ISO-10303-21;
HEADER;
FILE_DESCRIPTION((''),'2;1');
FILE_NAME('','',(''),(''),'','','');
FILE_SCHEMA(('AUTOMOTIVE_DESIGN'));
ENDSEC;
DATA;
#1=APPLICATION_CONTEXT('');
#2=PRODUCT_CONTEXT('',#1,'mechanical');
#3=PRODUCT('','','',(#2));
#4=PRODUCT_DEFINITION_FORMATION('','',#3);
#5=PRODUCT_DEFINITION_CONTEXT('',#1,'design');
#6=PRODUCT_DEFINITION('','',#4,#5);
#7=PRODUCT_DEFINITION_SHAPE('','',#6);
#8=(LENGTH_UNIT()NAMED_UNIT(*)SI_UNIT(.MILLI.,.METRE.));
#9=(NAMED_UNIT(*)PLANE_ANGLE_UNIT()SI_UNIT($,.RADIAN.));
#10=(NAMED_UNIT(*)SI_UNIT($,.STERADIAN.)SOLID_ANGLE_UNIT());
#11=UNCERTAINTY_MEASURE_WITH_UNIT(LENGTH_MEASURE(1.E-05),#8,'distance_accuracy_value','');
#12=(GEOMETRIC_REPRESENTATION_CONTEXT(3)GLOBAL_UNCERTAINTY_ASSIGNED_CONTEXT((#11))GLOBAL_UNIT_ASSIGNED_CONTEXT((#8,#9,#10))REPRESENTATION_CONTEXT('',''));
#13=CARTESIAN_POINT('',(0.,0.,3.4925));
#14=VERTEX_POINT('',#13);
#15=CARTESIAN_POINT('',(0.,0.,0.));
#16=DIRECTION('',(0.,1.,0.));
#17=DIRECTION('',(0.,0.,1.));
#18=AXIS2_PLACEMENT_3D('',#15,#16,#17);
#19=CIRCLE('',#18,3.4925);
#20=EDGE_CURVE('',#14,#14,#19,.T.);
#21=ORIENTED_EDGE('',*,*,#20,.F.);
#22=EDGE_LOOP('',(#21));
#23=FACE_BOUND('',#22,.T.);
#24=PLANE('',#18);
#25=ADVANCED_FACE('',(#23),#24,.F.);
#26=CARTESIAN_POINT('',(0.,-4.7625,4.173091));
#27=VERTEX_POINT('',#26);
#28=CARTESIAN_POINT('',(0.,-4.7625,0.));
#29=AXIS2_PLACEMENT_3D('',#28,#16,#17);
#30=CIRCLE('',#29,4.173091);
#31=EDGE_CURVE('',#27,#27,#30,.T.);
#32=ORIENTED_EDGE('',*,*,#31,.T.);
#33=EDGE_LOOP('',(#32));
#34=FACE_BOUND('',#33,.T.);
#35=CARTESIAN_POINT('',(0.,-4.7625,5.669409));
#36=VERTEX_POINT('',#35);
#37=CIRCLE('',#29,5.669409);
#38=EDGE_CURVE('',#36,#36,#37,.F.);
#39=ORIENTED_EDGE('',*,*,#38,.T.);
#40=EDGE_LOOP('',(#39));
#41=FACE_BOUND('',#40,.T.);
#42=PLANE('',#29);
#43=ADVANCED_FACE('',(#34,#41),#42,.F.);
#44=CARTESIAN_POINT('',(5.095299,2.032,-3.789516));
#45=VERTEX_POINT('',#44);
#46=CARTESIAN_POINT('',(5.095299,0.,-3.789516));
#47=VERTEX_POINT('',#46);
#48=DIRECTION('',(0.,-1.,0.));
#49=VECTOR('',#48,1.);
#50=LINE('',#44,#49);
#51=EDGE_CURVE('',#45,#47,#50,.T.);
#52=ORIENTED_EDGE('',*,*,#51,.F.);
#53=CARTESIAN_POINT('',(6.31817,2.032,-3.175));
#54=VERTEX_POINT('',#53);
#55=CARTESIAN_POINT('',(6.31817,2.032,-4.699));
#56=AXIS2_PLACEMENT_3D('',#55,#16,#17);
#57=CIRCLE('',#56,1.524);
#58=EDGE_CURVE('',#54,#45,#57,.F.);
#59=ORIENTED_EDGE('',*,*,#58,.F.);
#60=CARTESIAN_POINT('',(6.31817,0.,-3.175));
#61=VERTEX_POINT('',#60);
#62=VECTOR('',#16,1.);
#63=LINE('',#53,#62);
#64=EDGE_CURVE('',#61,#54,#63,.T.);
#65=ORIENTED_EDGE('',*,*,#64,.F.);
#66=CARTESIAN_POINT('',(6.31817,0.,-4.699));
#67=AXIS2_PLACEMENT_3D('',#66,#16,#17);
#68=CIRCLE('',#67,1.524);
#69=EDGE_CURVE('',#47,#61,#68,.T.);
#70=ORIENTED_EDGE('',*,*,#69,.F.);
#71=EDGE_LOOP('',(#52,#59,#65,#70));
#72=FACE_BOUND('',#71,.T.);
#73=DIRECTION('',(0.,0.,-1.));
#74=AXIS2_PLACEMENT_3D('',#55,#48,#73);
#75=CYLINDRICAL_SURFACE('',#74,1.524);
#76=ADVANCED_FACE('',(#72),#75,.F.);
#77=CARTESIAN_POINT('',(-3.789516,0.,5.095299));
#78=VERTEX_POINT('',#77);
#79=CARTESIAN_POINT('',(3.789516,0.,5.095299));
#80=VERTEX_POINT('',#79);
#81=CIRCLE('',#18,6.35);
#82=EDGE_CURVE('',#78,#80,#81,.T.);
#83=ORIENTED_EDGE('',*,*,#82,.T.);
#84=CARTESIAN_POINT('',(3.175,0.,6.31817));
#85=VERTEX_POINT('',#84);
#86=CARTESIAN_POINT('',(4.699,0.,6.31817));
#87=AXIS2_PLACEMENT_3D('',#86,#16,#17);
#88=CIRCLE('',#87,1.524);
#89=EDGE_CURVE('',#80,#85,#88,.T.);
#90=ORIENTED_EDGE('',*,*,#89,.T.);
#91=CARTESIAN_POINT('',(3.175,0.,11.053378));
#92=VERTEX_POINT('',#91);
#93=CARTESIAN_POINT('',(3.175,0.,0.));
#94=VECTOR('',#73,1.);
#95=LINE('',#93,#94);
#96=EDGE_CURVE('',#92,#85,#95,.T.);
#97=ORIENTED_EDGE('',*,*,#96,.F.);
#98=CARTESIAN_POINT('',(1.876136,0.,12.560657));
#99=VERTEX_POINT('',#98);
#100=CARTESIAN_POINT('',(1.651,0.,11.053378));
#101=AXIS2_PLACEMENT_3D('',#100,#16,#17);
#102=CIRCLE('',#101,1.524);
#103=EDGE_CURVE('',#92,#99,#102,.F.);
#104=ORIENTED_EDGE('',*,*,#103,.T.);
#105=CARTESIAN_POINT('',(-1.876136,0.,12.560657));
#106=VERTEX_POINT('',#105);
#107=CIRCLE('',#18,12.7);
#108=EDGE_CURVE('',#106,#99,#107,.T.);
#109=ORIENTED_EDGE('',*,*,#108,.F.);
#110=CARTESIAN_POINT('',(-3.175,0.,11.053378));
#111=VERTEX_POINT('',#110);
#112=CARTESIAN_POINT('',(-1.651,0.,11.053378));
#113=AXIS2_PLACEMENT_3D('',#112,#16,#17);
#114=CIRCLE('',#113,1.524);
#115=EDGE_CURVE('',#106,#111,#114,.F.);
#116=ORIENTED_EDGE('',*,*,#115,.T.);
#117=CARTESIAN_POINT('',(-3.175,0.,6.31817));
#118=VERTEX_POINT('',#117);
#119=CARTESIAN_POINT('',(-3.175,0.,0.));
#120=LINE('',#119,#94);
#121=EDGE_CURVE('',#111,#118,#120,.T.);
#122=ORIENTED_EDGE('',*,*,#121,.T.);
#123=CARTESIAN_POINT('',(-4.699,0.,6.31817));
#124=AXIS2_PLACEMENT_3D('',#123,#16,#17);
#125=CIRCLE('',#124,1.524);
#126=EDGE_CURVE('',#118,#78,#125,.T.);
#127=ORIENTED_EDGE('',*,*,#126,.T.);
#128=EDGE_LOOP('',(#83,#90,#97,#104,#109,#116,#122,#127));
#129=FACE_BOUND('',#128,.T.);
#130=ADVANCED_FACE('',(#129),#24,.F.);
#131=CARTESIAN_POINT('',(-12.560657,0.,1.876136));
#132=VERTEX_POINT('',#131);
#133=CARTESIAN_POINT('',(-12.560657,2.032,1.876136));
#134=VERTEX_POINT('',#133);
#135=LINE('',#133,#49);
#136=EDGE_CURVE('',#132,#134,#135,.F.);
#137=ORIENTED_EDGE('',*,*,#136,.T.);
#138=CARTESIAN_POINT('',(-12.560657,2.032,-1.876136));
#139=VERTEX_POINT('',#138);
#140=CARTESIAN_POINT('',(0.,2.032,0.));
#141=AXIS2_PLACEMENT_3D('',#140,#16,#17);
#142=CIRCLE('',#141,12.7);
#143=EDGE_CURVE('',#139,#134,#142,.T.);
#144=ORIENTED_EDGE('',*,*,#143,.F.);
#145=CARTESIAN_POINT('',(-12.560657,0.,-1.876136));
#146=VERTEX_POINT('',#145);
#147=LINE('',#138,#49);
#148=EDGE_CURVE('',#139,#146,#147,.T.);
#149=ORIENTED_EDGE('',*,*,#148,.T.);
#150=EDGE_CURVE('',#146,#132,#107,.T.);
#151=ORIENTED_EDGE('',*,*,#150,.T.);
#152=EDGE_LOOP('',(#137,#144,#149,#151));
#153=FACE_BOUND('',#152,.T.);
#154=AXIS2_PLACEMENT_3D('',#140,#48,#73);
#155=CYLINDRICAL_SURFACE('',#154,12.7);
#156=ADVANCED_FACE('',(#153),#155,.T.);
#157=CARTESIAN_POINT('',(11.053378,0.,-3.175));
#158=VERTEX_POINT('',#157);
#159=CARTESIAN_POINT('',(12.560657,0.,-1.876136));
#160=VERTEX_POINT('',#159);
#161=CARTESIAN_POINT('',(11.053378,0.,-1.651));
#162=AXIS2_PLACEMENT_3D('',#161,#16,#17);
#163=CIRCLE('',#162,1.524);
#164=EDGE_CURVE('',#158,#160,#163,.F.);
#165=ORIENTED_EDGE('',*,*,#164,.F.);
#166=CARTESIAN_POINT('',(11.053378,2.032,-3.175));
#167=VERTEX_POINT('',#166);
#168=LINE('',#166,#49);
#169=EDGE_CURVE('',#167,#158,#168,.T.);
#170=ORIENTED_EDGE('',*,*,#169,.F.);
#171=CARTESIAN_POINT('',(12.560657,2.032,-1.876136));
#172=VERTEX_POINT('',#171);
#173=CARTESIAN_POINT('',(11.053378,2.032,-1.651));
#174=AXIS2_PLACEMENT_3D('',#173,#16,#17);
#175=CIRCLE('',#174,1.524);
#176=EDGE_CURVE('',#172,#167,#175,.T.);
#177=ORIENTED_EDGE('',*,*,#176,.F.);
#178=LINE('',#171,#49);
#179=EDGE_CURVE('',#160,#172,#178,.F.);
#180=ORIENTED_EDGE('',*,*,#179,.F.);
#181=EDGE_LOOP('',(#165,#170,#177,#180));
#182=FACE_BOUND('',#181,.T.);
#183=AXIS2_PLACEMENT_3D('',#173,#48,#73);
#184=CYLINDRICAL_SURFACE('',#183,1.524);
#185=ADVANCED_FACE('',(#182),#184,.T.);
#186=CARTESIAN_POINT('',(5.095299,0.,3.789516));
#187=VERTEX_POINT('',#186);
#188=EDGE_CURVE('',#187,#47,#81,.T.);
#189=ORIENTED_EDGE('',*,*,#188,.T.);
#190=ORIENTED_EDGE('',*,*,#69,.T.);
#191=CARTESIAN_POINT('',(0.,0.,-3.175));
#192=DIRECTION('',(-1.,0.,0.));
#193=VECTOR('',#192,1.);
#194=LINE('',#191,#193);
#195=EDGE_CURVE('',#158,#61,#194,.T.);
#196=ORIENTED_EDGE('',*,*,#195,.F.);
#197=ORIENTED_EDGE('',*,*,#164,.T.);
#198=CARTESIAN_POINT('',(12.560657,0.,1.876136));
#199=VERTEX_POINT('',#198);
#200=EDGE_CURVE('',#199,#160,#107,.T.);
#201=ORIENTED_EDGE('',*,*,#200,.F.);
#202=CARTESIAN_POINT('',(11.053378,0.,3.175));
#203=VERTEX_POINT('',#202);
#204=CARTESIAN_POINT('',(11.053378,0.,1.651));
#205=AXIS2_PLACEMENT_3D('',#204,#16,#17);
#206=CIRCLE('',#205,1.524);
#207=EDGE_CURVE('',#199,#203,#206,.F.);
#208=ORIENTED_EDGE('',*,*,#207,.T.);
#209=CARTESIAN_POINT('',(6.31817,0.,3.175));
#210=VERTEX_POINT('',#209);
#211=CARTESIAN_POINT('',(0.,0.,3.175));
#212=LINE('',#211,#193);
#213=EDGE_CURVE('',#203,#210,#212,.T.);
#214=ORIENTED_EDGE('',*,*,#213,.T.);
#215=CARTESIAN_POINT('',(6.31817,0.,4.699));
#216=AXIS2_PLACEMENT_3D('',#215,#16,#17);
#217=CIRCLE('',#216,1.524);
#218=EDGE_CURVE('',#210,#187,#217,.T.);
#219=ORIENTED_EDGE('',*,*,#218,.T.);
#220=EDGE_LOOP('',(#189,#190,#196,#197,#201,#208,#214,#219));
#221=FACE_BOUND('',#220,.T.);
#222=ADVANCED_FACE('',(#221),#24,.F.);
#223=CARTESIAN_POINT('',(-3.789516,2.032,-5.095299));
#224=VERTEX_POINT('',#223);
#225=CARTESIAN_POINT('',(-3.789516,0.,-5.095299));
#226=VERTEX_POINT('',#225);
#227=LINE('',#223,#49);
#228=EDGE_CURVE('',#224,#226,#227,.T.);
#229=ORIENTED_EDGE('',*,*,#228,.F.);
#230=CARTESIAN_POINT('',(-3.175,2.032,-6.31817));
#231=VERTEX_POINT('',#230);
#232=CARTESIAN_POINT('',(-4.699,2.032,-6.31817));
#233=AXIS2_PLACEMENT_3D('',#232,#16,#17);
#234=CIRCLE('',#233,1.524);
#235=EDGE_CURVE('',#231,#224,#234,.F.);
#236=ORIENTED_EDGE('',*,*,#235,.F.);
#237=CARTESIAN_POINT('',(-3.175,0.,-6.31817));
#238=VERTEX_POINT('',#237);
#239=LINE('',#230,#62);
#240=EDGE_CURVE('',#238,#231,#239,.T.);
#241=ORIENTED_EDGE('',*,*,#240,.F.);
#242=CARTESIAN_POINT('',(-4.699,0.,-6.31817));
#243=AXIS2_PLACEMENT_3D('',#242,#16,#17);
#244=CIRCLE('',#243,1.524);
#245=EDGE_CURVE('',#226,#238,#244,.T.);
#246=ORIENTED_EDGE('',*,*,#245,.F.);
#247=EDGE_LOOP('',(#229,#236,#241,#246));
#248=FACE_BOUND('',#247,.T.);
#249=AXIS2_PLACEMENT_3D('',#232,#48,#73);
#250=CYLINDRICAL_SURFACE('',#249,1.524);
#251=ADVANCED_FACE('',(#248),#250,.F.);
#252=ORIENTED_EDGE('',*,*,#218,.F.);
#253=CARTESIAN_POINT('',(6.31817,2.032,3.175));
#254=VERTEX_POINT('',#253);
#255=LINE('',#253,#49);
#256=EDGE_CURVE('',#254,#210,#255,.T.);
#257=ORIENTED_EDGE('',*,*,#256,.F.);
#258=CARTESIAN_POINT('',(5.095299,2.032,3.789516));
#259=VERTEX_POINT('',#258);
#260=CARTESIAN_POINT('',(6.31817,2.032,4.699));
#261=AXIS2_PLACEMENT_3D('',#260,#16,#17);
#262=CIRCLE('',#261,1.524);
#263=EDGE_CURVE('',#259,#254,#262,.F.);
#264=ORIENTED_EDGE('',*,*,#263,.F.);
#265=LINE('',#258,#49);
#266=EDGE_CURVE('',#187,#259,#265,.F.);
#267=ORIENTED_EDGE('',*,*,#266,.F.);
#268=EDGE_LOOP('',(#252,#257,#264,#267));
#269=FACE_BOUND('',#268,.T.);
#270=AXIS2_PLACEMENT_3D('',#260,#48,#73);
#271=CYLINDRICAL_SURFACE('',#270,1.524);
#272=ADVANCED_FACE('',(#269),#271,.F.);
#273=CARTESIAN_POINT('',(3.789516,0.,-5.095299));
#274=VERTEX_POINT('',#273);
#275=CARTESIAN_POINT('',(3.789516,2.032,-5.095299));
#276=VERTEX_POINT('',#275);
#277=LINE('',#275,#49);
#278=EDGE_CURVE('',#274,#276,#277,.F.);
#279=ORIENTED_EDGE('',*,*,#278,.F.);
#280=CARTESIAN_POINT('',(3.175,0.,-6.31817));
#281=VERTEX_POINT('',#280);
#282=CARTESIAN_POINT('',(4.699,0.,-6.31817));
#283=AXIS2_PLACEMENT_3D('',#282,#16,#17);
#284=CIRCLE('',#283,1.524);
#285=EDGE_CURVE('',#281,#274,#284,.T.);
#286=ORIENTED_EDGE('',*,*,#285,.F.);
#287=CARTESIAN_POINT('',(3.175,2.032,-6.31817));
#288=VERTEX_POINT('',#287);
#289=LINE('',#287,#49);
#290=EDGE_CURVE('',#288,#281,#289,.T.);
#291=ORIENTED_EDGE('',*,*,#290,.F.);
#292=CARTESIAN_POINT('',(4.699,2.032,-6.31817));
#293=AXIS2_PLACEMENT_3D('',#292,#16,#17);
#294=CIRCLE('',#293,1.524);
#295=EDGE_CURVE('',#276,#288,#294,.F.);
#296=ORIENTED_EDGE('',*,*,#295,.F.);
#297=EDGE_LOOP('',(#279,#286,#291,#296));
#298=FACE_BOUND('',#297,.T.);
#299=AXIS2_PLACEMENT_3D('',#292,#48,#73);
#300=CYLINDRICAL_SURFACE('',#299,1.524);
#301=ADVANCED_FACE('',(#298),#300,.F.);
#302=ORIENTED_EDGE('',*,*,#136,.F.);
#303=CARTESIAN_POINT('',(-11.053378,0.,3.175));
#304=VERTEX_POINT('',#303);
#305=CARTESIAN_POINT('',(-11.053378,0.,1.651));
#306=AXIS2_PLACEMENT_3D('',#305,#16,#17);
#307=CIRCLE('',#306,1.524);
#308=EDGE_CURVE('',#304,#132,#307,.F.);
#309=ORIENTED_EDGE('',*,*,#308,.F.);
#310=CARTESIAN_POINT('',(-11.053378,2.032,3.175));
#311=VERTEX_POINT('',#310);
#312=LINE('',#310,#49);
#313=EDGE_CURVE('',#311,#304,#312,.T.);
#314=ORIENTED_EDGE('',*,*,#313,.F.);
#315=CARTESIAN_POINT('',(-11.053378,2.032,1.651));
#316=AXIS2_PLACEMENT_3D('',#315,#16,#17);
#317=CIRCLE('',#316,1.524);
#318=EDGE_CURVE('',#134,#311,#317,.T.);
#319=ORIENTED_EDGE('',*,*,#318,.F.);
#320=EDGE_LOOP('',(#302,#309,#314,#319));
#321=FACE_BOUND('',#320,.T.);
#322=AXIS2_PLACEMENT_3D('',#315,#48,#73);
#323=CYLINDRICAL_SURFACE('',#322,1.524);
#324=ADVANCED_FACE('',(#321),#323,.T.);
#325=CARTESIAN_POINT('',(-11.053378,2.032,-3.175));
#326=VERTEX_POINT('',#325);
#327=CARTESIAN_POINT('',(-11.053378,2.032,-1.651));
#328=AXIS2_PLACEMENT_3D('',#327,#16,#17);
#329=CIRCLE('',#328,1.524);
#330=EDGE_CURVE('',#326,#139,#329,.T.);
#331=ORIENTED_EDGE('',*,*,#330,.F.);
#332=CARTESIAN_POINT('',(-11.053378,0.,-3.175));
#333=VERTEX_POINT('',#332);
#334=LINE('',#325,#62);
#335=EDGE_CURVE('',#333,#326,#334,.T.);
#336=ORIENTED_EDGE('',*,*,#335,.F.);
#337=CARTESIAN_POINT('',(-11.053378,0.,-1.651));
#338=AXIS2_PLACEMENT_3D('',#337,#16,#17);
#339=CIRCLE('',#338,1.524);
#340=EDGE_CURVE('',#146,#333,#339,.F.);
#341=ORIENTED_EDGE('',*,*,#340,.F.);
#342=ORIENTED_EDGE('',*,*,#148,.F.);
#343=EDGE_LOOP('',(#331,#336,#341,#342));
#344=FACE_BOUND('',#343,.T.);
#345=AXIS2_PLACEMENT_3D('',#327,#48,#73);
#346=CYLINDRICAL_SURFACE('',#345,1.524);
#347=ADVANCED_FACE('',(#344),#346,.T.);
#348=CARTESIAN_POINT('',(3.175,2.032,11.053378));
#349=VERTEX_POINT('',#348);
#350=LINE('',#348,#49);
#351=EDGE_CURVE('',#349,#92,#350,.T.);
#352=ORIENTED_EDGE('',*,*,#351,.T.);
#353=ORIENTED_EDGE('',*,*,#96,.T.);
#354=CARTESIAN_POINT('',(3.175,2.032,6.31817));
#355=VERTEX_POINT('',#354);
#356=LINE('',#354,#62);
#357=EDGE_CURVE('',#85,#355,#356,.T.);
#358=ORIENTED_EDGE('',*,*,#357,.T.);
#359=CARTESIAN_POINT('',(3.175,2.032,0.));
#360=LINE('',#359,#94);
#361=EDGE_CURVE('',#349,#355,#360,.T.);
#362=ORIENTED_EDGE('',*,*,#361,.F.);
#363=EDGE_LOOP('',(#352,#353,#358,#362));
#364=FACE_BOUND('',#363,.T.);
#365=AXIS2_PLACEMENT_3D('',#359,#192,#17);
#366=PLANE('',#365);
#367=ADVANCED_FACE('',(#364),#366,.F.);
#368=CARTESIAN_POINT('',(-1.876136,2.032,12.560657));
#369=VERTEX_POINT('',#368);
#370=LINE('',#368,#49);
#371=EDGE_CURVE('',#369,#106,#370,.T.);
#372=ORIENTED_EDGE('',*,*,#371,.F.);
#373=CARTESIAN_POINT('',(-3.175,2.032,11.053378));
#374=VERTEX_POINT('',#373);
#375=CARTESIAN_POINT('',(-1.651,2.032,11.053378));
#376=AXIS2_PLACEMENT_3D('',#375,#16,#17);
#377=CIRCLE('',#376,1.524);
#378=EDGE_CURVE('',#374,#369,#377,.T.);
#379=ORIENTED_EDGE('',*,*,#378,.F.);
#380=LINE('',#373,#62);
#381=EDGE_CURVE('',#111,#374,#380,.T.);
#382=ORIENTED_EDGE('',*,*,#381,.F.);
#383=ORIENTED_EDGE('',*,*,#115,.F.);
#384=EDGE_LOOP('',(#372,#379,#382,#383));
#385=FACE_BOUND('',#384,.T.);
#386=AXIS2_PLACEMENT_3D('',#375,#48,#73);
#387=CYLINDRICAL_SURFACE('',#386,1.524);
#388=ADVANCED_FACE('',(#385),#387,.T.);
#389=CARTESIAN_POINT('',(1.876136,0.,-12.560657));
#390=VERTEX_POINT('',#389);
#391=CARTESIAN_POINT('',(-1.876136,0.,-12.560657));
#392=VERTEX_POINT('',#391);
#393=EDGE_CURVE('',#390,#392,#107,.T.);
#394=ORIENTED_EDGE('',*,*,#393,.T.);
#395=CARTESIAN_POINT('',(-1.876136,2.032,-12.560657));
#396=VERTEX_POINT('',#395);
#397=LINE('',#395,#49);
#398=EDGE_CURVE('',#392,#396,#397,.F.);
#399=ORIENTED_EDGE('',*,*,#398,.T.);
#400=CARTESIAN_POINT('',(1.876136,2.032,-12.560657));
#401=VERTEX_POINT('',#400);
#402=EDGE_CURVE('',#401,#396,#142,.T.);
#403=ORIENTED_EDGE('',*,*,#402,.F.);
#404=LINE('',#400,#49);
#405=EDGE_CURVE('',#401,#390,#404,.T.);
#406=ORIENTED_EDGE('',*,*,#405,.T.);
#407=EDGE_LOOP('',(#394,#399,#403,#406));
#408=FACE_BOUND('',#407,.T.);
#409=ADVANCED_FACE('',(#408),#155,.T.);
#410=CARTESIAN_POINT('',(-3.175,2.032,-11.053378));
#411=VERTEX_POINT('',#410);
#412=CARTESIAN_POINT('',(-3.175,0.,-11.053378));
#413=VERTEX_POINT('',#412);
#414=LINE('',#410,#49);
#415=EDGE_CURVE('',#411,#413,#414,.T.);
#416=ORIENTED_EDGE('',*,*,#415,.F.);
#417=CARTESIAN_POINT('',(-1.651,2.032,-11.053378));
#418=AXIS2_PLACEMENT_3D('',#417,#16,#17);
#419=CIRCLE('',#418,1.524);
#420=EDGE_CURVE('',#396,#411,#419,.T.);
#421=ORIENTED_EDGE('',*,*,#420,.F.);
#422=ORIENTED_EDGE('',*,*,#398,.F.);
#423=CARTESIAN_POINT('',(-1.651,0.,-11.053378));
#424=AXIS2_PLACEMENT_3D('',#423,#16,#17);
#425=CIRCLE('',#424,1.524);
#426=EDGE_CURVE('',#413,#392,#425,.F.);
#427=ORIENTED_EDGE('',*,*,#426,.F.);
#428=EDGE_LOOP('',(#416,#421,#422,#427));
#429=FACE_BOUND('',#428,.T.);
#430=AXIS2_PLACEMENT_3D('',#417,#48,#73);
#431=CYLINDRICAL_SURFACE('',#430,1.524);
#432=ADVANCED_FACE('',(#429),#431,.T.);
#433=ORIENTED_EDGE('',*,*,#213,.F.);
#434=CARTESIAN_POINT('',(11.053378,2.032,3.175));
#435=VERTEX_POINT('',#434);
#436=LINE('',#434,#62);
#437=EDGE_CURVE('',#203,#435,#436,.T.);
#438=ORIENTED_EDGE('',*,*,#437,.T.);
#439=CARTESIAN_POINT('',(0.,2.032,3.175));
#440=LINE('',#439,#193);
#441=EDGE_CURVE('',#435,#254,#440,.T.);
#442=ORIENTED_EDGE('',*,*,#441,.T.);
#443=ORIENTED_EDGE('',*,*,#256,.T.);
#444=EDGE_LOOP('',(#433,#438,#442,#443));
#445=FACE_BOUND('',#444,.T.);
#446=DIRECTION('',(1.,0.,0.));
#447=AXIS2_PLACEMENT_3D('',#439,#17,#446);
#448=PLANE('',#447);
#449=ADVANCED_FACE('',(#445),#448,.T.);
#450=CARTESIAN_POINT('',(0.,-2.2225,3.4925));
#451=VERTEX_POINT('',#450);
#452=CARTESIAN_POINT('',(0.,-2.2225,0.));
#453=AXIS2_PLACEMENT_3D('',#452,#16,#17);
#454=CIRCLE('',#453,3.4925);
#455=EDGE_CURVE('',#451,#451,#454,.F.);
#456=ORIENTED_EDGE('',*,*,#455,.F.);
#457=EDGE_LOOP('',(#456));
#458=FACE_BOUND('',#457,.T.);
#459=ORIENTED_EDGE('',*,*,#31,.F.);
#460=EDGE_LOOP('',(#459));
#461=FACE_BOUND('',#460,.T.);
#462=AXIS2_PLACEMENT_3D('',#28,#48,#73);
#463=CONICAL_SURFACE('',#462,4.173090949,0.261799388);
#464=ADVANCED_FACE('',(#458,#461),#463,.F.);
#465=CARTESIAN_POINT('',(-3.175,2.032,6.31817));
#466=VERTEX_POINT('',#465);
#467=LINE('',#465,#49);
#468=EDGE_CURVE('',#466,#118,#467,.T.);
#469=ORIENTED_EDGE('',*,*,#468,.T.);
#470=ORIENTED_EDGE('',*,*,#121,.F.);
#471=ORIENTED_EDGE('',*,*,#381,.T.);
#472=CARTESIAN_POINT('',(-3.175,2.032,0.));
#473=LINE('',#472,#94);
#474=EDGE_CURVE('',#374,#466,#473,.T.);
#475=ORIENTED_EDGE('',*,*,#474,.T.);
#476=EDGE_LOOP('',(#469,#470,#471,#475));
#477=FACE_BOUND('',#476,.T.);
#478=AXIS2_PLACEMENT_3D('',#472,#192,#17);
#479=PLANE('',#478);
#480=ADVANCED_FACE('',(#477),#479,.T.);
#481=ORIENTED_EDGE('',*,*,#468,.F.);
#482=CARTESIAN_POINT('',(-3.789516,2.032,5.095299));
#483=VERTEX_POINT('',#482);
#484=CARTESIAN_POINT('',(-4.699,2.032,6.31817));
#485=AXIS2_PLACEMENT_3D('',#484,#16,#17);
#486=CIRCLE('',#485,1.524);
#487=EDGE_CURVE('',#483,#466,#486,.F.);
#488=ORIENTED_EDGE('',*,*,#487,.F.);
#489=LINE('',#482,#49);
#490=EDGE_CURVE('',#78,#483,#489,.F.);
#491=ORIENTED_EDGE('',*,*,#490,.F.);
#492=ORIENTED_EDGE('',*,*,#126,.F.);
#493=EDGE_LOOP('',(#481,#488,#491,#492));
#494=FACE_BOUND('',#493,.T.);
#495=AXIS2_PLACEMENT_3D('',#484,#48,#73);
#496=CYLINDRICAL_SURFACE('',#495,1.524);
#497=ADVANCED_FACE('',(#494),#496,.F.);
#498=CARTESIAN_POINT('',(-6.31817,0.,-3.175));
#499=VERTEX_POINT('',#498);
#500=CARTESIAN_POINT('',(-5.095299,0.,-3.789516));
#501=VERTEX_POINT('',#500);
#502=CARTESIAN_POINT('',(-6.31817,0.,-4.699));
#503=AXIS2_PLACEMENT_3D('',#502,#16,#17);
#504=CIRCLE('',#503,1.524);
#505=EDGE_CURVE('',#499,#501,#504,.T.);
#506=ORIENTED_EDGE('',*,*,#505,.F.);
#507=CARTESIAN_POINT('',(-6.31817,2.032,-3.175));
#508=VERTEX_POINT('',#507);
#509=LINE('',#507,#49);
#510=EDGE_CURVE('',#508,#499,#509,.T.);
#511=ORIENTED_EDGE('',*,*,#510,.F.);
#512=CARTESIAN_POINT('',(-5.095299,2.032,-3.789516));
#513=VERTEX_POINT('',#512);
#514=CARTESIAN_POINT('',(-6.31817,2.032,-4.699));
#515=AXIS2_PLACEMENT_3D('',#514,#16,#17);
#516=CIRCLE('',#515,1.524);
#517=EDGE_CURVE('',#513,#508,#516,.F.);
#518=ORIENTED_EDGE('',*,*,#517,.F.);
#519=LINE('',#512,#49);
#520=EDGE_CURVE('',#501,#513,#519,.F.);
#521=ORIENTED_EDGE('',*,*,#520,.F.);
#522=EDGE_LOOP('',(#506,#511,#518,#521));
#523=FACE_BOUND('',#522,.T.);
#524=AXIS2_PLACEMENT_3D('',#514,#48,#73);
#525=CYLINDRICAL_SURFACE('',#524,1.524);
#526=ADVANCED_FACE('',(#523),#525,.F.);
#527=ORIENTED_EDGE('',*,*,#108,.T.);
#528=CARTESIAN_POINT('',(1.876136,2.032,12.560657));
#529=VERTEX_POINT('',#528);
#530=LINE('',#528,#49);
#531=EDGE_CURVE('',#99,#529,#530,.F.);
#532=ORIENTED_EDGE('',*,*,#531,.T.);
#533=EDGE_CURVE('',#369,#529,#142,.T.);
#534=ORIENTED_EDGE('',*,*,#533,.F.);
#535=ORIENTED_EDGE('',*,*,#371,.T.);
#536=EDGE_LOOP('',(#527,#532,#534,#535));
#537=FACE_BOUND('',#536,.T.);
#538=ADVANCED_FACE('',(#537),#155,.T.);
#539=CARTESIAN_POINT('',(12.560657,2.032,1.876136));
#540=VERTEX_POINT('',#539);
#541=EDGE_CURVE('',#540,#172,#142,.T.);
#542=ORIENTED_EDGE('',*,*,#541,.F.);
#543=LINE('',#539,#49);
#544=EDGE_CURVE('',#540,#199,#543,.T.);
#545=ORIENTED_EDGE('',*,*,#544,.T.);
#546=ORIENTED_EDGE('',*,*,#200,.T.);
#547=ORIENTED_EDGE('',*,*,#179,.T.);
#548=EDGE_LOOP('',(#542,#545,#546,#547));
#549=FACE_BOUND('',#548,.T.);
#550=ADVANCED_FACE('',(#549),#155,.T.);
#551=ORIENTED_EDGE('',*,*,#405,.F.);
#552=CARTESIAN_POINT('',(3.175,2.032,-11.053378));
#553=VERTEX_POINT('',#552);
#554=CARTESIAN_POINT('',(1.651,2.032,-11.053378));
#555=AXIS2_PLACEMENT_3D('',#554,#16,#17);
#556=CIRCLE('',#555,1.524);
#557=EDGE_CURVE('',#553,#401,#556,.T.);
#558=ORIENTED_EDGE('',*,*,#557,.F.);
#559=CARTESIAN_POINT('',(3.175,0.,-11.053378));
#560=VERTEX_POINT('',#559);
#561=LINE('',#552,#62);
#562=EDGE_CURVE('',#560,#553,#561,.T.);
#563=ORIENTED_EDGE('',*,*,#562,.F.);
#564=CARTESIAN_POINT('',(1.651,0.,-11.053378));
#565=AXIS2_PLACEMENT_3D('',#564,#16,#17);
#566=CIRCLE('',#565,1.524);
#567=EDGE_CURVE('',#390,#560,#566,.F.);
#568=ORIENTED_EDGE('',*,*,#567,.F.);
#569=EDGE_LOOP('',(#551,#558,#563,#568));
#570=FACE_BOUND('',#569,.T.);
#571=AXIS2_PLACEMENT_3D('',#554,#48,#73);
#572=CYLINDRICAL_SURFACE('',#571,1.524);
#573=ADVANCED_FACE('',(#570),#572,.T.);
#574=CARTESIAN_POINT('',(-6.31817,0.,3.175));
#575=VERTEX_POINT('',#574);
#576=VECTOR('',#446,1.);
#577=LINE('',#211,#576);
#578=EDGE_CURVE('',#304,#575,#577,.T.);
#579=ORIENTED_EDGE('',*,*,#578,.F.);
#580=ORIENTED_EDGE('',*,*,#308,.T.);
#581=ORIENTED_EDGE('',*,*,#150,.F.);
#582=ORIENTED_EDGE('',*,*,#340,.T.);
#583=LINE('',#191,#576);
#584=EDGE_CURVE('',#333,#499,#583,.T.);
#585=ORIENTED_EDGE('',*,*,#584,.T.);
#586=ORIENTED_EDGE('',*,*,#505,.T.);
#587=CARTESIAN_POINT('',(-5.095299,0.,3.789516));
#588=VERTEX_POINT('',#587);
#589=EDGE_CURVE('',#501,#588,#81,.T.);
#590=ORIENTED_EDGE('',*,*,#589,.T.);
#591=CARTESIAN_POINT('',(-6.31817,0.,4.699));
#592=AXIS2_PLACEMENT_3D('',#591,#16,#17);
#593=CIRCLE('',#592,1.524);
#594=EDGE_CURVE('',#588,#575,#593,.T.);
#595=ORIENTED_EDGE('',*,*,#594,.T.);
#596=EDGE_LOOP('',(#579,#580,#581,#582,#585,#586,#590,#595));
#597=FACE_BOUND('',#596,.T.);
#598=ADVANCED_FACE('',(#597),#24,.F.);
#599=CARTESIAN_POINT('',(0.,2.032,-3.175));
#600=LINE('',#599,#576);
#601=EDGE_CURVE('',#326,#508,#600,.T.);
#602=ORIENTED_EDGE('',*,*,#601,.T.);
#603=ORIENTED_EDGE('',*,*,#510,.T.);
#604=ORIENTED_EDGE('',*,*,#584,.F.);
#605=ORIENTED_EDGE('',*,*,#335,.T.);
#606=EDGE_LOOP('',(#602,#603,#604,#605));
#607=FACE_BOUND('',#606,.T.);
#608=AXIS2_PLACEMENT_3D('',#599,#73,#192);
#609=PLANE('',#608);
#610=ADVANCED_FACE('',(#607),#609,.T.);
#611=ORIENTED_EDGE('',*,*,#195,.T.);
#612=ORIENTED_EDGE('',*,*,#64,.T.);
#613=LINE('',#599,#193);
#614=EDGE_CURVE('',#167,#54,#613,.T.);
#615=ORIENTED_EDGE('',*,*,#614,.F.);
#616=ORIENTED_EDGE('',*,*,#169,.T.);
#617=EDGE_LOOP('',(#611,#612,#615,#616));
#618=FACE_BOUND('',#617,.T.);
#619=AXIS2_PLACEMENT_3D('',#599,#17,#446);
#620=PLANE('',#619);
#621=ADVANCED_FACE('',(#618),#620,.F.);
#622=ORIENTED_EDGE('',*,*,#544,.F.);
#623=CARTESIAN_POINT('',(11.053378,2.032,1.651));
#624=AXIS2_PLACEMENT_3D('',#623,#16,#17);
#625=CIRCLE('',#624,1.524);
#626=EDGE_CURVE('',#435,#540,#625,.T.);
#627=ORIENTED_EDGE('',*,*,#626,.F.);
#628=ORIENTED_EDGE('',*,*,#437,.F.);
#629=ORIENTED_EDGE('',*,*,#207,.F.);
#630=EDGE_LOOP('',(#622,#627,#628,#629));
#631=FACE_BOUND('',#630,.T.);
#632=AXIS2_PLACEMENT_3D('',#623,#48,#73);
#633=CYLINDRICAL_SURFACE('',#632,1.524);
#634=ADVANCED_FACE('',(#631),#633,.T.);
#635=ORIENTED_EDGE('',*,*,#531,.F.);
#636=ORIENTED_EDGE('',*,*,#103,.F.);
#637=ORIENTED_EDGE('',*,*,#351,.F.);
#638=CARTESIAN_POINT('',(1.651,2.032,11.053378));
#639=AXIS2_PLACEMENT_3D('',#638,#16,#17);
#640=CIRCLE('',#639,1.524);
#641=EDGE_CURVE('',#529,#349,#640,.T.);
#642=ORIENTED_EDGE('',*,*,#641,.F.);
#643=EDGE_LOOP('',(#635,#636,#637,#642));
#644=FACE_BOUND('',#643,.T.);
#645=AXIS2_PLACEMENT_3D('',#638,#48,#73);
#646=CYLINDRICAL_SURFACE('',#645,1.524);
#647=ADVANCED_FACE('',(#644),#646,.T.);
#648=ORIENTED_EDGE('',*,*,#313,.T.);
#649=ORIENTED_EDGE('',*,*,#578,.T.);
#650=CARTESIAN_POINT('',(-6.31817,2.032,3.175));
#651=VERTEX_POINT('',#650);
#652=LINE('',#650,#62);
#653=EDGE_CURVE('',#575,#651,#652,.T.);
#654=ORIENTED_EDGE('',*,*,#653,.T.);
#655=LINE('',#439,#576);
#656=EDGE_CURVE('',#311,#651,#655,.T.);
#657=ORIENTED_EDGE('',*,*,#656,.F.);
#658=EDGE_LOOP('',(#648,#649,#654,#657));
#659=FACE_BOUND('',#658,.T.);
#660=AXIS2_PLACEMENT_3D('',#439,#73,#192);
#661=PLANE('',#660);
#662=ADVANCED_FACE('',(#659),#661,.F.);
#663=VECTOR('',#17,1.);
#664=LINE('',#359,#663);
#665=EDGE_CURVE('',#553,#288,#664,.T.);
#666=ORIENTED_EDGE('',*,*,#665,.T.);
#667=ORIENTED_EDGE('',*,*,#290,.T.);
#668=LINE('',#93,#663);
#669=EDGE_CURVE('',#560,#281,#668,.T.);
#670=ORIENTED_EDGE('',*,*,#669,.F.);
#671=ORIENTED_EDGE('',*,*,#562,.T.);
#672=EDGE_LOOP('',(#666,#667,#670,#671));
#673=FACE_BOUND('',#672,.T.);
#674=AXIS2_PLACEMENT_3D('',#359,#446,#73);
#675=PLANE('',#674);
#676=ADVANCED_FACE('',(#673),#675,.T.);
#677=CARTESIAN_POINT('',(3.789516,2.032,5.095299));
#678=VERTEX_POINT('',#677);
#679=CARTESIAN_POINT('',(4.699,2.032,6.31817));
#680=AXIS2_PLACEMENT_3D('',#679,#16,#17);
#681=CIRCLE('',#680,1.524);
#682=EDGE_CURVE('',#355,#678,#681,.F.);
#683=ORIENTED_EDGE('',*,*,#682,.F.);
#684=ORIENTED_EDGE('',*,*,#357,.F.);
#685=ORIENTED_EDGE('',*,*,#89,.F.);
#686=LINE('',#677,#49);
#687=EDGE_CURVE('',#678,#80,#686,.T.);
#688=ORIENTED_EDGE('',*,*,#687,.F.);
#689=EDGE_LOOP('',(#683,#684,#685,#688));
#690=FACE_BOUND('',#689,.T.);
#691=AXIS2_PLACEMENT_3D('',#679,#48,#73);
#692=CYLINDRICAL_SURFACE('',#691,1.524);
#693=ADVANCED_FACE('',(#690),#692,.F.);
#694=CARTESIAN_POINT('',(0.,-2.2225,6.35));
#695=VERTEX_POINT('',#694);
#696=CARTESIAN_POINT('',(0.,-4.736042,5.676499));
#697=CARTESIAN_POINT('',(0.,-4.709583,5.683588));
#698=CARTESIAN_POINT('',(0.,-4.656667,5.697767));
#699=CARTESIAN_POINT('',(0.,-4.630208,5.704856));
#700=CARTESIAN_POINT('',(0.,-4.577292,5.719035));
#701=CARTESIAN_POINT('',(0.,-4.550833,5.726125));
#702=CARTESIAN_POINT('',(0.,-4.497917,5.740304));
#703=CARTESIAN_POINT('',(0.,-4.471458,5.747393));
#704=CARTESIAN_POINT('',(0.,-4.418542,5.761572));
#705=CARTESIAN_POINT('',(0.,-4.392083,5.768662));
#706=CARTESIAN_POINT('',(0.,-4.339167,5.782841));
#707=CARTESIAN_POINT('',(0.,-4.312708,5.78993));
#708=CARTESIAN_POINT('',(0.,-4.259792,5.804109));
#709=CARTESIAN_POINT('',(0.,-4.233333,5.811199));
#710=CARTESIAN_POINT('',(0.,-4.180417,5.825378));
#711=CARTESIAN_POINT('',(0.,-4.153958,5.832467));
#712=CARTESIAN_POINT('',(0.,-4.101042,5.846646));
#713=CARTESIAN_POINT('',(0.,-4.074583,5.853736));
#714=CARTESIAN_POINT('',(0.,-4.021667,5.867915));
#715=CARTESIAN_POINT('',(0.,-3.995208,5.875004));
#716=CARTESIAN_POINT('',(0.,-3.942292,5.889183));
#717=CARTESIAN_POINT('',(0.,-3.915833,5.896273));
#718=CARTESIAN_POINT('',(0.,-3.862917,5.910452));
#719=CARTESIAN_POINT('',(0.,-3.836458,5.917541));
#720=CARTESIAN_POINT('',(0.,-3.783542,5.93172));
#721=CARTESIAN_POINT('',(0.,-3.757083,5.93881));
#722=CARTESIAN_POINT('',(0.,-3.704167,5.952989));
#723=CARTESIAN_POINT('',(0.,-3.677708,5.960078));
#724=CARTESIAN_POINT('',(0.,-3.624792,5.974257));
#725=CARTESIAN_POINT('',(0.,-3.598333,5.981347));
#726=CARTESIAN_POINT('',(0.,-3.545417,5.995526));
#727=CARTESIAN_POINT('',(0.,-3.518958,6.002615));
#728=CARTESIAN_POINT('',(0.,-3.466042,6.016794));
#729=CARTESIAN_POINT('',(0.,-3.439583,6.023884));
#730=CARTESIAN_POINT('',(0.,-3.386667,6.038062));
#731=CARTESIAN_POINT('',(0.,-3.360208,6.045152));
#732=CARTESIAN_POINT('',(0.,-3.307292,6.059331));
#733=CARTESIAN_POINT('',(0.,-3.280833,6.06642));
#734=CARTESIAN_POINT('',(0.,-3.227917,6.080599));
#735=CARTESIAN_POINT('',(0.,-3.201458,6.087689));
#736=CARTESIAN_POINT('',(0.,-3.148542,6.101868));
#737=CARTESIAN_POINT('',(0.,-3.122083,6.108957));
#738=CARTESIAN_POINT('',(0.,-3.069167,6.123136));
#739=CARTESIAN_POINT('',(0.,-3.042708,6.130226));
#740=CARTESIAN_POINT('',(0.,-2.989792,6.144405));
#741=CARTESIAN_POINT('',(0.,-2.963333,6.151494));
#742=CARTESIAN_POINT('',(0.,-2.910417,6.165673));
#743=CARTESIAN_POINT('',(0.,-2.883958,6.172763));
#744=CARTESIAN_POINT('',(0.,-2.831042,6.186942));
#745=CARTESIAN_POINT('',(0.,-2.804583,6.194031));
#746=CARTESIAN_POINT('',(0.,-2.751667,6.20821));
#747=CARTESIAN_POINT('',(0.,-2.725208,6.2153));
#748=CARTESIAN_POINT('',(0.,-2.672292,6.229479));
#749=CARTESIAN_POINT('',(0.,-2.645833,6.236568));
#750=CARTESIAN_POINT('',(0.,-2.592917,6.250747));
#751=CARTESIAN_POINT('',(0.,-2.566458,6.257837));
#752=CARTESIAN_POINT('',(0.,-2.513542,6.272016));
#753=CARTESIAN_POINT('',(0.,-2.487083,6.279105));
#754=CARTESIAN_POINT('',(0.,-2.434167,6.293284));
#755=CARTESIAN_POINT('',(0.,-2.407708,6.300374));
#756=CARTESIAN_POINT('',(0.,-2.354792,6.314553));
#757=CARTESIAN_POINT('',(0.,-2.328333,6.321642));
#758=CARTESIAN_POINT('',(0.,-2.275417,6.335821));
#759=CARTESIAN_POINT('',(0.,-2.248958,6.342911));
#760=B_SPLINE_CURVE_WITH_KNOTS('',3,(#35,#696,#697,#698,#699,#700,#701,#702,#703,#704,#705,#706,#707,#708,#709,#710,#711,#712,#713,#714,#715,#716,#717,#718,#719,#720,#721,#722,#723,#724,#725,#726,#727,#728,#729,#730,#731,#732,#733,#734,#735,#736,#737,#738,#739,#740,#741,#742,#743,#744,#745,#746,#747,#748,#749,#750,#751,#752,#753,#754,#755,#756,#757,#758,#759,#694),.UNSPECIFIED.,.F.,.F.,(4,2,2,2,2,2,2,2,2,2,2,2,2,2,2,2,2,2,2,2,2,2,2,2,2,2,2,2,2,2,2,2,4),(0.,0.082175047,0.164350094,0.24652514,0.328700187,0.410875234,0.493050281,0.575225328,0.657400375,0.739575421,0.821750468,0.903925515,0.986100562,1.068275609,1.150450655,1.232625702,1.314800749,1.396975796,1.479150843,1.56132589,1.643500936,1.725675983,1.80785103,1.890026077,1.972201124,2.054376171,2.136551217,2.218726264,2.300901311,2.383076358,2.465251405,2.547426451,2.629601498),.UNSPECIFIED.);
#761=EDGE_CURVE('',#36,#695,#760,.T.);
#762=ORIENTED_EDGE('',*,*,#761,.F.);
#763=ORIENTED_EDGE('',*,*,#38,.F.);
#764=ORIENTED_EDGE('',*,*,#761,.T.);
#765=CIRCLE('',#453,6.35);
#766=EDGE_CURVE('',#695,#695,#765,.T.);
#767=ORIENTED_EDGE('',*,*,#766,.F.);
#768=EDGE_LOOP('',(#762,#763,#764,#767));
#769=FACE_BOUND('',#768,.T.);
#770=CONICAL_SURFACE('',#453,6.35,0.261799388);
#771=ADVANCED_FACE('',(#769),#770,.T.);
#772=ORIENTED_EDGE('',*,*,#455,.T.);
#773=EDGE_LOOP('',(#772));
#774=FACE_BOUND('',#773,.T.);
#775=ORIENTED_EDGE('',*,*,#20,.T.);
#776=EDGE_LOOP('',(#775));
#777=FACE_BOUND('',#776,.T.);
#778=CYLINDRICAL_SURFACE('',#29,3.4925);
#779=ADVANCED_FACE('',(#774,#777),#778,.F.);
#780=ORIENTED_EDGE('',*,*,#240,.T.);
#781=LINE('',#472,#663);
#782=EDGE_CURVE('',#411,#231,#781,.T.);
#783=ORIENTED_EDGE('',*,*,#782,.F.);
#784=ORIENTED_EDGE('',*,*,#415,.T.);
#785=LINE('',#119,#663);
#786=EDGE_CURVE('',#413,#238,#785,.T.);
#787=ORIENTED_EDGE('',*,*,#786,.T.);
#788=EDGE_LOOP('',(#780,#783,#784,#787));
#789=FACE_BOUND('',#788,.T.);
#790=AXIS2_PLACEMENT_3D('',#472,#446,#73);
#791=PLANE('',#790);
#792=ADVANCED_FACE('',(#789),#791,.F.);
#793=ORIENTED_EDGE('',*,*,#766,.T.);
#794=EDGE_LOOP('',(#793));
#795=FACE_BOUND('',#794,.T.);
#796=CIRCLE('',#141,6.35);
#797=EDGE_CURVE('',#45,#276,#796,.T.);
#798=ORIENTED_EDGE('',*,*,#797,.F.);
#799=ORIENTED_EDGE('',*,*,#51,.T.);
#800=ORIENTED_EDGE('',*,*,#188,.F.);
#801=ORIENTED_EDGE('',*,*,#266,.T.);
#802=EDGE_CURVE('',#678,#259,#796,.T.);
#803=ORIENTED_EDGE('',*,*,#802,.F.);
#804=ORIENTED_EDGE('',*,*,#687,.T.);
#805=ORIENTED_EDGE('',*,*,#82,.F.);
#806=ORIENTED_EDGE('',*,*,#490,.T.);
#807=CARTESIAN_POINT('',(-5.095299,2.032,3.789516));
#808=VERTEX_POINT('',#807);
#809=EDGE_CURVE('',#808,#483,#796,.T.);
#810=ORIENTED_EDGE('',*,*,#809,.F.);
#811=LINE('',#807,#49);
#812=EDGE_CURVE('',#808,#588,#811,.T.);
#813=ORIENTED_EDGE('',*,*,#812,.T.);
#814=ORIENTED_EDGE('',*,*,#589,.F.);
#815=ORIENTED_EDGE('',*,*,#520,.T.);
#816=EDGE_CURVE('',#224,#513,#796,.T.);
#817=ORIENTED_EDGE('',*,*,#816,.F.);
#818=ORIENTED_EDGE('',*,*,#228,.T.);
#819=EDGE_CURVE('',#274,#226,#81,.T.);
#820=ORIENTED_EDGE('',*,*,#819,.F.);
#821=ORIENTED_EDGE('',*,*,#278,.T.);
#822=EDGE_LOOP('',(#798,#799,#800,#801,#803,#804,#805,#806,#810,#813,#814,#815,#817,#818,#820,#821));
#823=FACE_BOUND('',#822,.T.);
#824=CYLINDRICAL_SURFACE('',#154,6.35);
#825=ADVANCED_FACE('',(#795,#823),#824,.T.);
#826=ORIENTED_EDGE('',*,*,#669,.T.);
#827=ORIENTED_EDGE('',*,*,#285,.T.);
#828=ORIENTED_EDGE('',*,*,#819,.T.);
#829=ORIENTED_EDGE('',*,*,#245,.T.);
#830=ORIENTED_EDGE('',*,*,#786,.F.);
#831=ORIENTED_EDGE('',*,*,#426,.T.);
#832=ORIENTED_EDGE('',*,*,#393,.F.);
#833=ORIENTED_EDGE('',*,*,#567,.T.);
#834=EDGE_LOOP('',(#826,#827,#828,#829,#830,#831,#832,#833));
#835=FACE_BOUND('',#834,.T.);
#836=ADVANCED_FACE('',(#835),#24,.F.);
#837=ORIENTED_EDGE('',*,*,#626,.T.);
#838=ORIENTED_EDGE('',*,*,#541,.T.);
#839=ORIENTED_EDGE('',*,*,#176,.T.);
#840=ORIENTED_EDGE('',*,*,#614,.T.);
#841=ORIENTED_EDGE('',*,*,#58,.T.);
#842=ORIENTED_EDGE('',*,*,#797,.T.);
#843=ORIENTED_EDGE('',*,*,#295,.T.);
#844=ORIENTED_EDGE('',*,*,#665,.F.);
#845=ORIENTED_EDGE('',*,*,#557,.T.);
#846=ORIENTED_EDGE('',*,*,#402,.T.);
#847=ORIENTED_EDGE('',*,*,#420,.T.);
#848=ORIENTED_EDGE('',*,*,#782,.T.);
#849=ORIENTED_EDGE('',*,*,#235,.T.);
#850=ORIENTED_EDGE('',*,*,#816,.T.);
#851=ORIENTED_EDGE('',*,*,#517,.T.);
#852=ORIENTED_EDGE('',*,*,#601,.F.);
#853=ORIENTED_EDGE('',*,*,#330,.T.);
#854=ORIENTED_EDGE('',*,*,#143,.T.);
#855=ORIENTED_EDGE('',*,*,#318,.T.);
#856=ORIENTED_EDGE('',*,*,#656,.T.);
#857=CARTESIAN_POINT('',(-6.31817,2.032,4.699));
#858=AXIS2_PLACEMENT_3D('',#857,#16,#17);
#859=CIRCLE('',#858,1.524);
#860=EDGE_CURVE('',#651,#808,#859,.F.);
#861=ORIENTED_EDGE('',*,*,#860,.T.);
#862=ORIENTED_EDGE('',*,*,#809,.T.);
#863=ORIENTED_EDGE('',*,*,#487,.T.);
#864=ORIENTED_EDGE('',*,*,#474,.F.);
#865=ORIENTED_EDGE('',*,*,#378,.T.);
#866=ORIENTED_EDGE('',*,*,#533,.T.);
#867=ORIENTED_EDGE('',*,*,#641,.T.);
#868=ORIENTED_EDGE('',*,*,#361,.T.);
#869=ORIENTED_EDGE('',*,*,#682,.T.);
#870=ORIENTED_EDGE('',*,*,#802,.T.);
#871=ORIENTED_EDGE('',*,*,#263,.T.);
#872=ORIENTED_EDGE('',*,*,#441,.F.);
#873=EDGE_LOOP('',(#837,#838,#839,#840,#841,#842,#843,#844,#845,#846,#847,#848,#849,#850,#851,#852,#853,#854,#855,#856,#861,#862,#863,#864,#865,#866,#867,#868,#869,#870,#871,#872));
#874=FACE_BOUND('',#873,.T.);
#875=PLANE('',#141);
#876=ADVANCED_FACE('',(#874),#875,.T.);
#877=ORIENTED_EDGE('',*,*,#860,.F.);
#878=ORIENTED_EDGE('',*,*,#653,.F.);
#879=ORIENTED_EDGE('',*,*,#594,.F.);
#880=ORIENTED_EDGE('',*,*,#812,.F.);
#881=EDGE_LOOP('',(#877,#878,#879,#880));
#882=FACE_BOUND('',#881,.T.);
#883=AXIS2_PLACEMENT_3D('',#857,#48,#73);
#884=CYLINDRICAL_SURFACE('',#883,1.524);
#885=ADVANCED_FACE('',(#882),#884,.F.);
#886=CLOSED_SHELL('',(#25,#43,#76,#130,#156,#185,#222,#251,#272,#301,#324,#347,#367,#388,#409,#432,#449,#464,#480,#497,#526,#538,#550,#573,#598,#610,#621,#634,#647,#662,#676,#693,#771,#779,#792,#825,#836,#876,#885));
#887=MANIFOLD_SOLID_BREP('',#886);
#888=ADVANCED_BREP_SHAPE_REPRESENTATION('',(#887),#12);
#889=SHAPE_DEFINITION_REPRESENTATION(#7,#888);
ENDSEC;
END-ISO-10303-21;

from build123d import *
from OCP.BRepFilletAPI import BRepFilletAPI_MakeChamfer

# Parameters (mm, degrees)
BOSS_EXTRUDE1_DEPTH = 2.032
BOSS_EXTRUDE2_START = -4.762499999999999
SKETCH1_3_R         = 3.4925
BOSS_EXTRUDE2_DEPTH = 4.762499999999999
CHAMFER1_SIZE       = 2.54
CHAMFER1_SIZE2      = 0.6805909487750533
FILLET2_R           = 1.524


with BuildPart() as part:
    # Sketch1 → Boss-Extrude1 (new body)
    with BuildSketch(Plane(origin=(0, 0, 0), x_dir=(1, 0, 0), z_dir=(0, 1, 0))):
        with BuildLine():
            Line((-3.1749999999999994, 12.29672212420855), (-3.175, 5.499261314031185))
            ThreePointArc((-3.1750000000000007, 5.499261314031186), (-4.490128060534577, 4.490128060534578), (-5.499261314031186, 3.1750000000000016))
            Line((-5.499261314031183, 3.1750000000000007), (-12.296722124208548, 3.1750000000000034))
            ThreePointArc((-12.296722124208548, 3.175000000000004), (-12.700000000000001, 1.56e-15), (-12.29672212420855, -3.175000000000001))
            Line((-12.296722124208545, -3.1750000000000003), (-5.499261314031183, -3.175000000000001))
            ThreePointArc((-5.499261314031185, -3.175000000000003), (-4.490128060534575, -4.490128060534579), (-3.174999999999998, -5.499261314031186))
            Line((-3.174999999999998, -5.499261314031185), (-3.1749999999999976, -12.296722124208545))
            ThreePointArc((-3.1750000000000047, -12.296722124208548), (-2.33e-15, -12.700000000000001), (3.175, -12.29672212420855))
            Line((3.175000000000002, -12.296722124208543), (3.175000000000001, -5.499261314031185))
            ThreePointArc((3.175, -5.499261314031186), (4.490128060534578, -4.490128060534577), (5.499261314031187, -3.1749999999999994))
            Line((5.499261314031186, -3.1749999999999985), (12.296722124208548, -3.1749999999999954))
            ThreePointArc((12.296722124208552, -3.174999999999996), (12.700000000000003, 4.44e-15), (12.296722124208548, 3.1750000000000043))
            Line((12.296722124208546, 3.1750000000000043), (5.499261314031185, 3.1750000000000007))
            ThreePointArc((5.499261314031187, 3.175), (4.490128060534579, 4.490128060534575), (3.1749999999999994, 5.499261314031187))
            Line((3.1749999999999994, 5.499261314031186), (3.175, 12.296722124208548))
            ThreePointArc((3.1750000000000003, 12.29672212420855), (8.9e-16, 12.700000000000001), (-3.1749999999999985, 12.29672212420855))
        make_face()
    extrude(amount=BOSS_EXTRUDE1_DEPTH)

    # Sketch1<3> → Boss-Extrude2 (add)
    with BuildSketch(Plane(origin=(0, 0, 0), x_dir=(1, 0, 0), z_dir=(0, 1, 0)).offset(BOSS_EXTRUDE2_START)):
        with BuildLine():
            ThreePointArc((3.174999999999999, 5.499261314031186), (-1.02e-15, 6.35), (-3.175000000000001, 5.499261314031184))
            ThreePointArc((-3.175000000000001, 5.499261314031184), (-4.490128060534576, 4.490128060534577), (-5.499261314031184, 3.175000000000002))
            ThreePointArc((-5.499261314031184, 3.175000000000002), (-6.35, 7.8e-16), (-5.499261314031185, -3.1750000000000007))
            ThreePointArc((-5.499261314031185, -3.1750000000000007), (-4.490128060534575, -4.490128060534578), (-3.174999999999997, -5.499261314031187))
            ThreePointArc((-3.174999999999997, -5.499261314031187), (-1.17e-15, -6.35), (3.1750000000000007, -5.499261314031185))
            ThreePointArc((3.1750000000000007, -5.499261314031185), (4.4901280605345795, -4.490128060534573), (5.499261314031187, -3.1749999999999976))
            ThreePointArc((5.499261314031187, -3.1749999999999976), (6.133628996935584, -1.6435009364010063), (6.35, -1.56e-15))
            ThreePointArc((6.35, 0), (6.133628996935584, 1.6435009364010074), (5.499261314031185, 3.1750000000000007))
            ThreePointArc((5.499261314031185, 3.1750000000000007), (4.490128060534575, 4.490128060534578), (3.174999999999999, 5.499261314031186))
        make_face()
        with Locations(Location((0, 0, 0), (0, 0, 270))):
            Circle(SKETCH1_3_R, mode=Mode.SUBTRACT)
    extrude(amount=BOSS_EXTRUDE2_DEPTH)

    # Chamfer1: one chamfer whose edges measure the first distance from different faces: ONE call of the kernel's chamfer builder (chamfer() names one face for all edges)
    chamfer1_edges_1 = [part.edges().sort_by_distance(p)[0] for p in [
        (3.174999999999999, -4.762499999999999, -5.499261314031194),
    ]]
    chamfer1_side_1 = [part.faces().sort_by_distance(p)[0] for p in [
        (3.1749999999999865, -2.3812499999999996, -5.499261314031195),
    ]]
    chamfer1_edges_2 = [part.edges().sort_by_distance(p)[0] for p in [
        (1.07e-15, -4.762499999999999, -3.4925),
    ]]
    chamfer1_side_2 = [part.faces().sort_by_distance(p)[0] for p in [
        (1.07e-15, -2.3812499999999996, -3.4925),
    ]]
    chamfer1 = BRepFilletAPI_MakeChamfer(part.part.solid().wrapped)
    for e in chamfer1_edges_1:
        chamfer1.Add(CHAMFER1_SIZE, CHAMFER1_SIZE2, e.wrapped, chamfer1_side_1[0].wrapped)  # the first distance lies on this face
    for e in chamfer1_edges_2:
        chamfer1.Add(CHAMFER1_SIZE, CHAMFER1_SIZE2, e.wrapped, chamfer1_side_2[0].wrapped)  # the first distance lies on this face
    add(Compound.cast(chamfer1.Shape()), mode=Mode.REPLACE)

    # Fillet2
    # the kernel refuses this fillet: 1.524 mm, written as the material it adds along each edge
    with BuildSketch(Plane(origin=(3.174999999999999, 0, -5.499261314031187), x_dir=(0.8356194334098629, 0, 0.5493088043239246), z_dir=(0, 1, 0))) as fillet2_piece_1:
        with BuildLine():
            CenterArc((0.8236501414377086, 1.521442818511674), FILLET2_R, 213.31960697214814, 53.3607860557035)
            Line((-0.44983387507892303, 0.6842962007220136), (0, 0))
            ThreePointArc((0, 0), (0.3677009559989754, 0.01065492286802284), (0.7354019119979511, -2e-17))
        make_face()
    extrude(amount=2.032)
    with BuildSketch(Plane(origin=(5.499261314031186, 0, -3.1750000000000007), x_dir=(-0.5493088043239264, 0, -0.8356194334098619), z_dir=(0, 1, 0))) as fillet2_piece_2:
        with BuildLine():
            CenterArc((0.8236501414377053, -1.5214428185116746), FILLET2_R, 93.31960697214826, 53.360786055703514)
            Line((-0.4498338750789252, -0.6842962007220122), (0, 0))
            ThreePointArc((0, 0), (0.36770095599897556, -0.01065492286802262), (0.7354019119979507, -5e-17))
        make_face()
    extrude(amount=2.032)
    with BuildSketch(Plane(origin=(5.499261314031186, 0, 3.174999999999999), x_dir=(-0.5493088043238707, 0, 0.8356194334098983), z_dir=(0, 1, 0))) as fillet2_piece_3:
        with BuildLine():
            CenterArc((0.82365014143777, 1.5214428185116702), FILLET2_R, 213.31960697214453, 53.36078605570418)
            Line((-0.44983387507891454, 0.6842962007220903), (0, 0))
            ThreePointArc((0, 0), (0.36770095599897146, 0.0106549228680418), (0.7354019119979344, 0))
        make_face()
    extrude(amount=2.032)
    with BuildSketch(Plane(origin=(3.1750000000000007, 0, 5.499261314031186), x_dir=(0.8356194334099104, 0, -0.5493088043238523), z_dir=(0, 1, 0))) as fillet2_piece_4:
        with BuildLine():
            CenterArc((0.8236501414377962, -1.5214428185116662), FILLET2_R, 93.31960697215332, 53.360786055703485)
            Line((-0.44983387507890776, -0.684296200722116), (0, 0))
            ThreePointArc((0, 0), (0.3677009559989559, -0.01065492286805522), (0.7354019119979073, 0))
        make_face()
    extrude(amount=2.032)
    with BuildSketch(Plane(origin=(-3.1749999999999976, 0, 5.499261314031186), x_dir=(-0.8356194334099473, 0, -0.5493088043237963), z_dir=(0, 1, 0))) as fillet2_piece_5:
        with BuildLine():
            CenterArc((0.8236501414378631, 1.5214428185116622), FILLET2_R, 213.31960697213952, 53.36078605570407)
            Line((-0.44983387507889466, 0.6842962007221938), (0, 0))
            ThreePointArc((0, 0), (0.3677009559989472, 0.01065492286807322), (0.7354019119978917, 3e-17))
        make_face()
    extrude(amount=2.032)
    with BuildSketch(Plane(origin=(-5.499261314031184, 0, 3.1750000000000025), x_dir=(0.5493088043237985, 0, 0.8356194334099457), z_dir=(0, 1, 0))) as fillet2_piece_6:
        with BuildLine():
            CenterArc((0.823650141437862, -1.521442818511662), FILLET2_R, 93.31960697215631, 53.36078605570414)
            Line((-0.44983387507889533, -0.6842962007221932), (0, 0))
            ThreePointArc((0, 0), (0.36770095599894603, -0.01065492286807348), (0.7354019119978936, -3e-17))
        make_face()
    extrude(amount=2.032)
    with BuildSketch(Plane(origin=(-5.499261314031185, 0, -3.1750000000000016), x_dir=(0.5493088043238532, 0, -0.8356194334099099), z_dir=(0, 1, 0))) as fillet2_piece_7:
        with BuildLine():
            CenterArc((0.8236501414377951, 1.5214428185116664), FILLET2_R, 213.3196069721432, 53.36078605570356)
            Line((-0.44983387507890893, 0.6842962007221164), (0, 0))
            ThreePointArc((0, 0), (0.3677009559989552, 0.01065492286805513), (0.7354019119979077, 3e-17))
        make_face()
    extrude(amount=2.032)
    with BuildSketch(Plane(origin=(-3.1750000000000007, 0, -5.499261314031186), x_dir=(-0.8356194334098974, 0, 0.5493088043238722), z_dir=(0, 1, 0))) as fillet2_piece_8:
        with BuildLine():
            CenterArc((0.8236501414377697, -1.5214428185116697), FILLET2_R, 93.31960697215125, 53.36078605570417)
            Line((-0.44983387507891404, -0.6842962007220886), (0, 0))
            ThreePointArc((0, 0), (0.3677009559989685, -0.01065492286804046), (0.7354019119979357, 0))
        make_face()
    extrude(amount=2.032)
    # the kernel refuses this fillet: 1.524 mm, written as the material it takes off along each edge
    with BuildSketch(Plane(origin=(3.175, -3.313522044377113, -12.29672212420855), x_dir=(-0.9799720802882134, 0, -0.1991349337901098), z_dir=(0, 1, 0))) as fillet2_2_piece_1:
        with BuildLine():
            CenterArc((1.2458842886857948, 1.5219237330684425), FILLET2_R, 191.48637688209308, 81.5047584217437)
            Line((-0.24759316167344236, 1.218442093972315), (0, 0))
            ThreePointArc((0, 0), (0.662704408875422, -0.01730222442965028), (1.325408817750845, 1e-17))
        make_face()
    extrude(amount=8.659044088754227, mode=Mode.SUBTRACT)
    with BuildSketch(Plane(origin=(12.29672212420855, -3.313522044377107, -3.1750000000000043), x_dir=(-1, 0, 3.6e-16), z_dir=(0, 1, 0))) as fillet2_2_piece_2:
        with BuildLine():
            CenterArc((1.2433436813975, 1.524), FILLET2_R, 188.49524157825633, 81.50475842174365)
            ThreePointArc((-0.2639351971676436, 1.2988636363636346), (-0.14892329545175875, 0.6459863408655977), (0, 0))
            Line((0, 0), (1.2433436813974996, 0))
        make_face()
    extrude(amount=8.659044088754214, mode=Mode.SUBTRACT)
    with BuildSketch(Plane(origin=(12.29672212420855, -3.3135220443771116, 3.1749999999999954), x_dir=(0.19913493379011118, 0, -0.979972080288213), z_dir=(0, 1, 0))) as fillet2_2_piece_3:
        with BuildLine():
            CenterArc((1.2458842886857922, 1.5219237330684423), FILLET2_R, 191.48637688209323, 81.50475842174365)
            Line((-0.24759316167344428, 1.218442093972311), (0, 0))
            ThreePointArc((0, 0), (0.6627044088754224, -0.0173022244296529), (1.3254088177508445, -3e-17))
        make_face()
    extrude(amount=8.659044088754225, mode=Mode.SUBTRACT)
    with BuildSketch(Plane(origin=(3.1750000000000016, -3.3135220443771147, 12.296722124208548), x_dir=(-0.979972080288213, 0, 0.19913493379011105), z_dir=(0, 1, 0))) as fillet2_2_piece_4:
        with BuildLine():
            CenterArc((1.245884288685793, -1.521923733068442), FILLET2_R, 87.00886469616313, 81.50475842174379)
            Line((-0.24759316167344436, -1.2184420939723146), (0, 0))
            ThreePointArc((0, 0), (0.6627044088754228, 0.0173022244296529), (1.3254088177508452, 4e-17))
        make_face()
    extrude(amount=8.65904408875423, mode=Mode.SUBTRACT)
    with BuildSketch(Plane(origin=(-3.1749999999999976, -3.313522044377123, 12.29672212420855), x_dir=(0, 0, -1), z_dir=(0, 1, 0))) as fillet2_2_piece_5:
        with BuildLine():
            CenterArc((1.2433436813975014, -1.524), FILLET2_R, 90, 81.50475842174376)
            ThreePointArc((-0.26393519716764224, -1.2988636363636372), (-0.14892329545176075, -0.6459863408655981), (0, 0))
            Line((0, 0), (1.2433436813975014, 0))
        make_face()
    extrude(amount=8.659044088754246, mode=Mode.SUBTRACT)
    with BuildSketch(Plane(origin=(-12.29672212420855, -3.313522044377118, 3.1750000000000003), x_dir=(1, 0, 0), z_dir=(0, 1, 0))) as fillet2_2_piece_6:
        with BuildLine():
            CenterArc((1.2433436813975014, 1.524), FILLET2_R, 188.4952415782562, 81.50475842174376)
            ThreePointArc((-0.26393519716764224, 1.298863636363638), (-0.1489232954517643, 0.6459863408655999), (0, 0))
            Line((0, 0), (1.2433436813975014, 0))
        make_face()
    extrude(amount=8.659044088754236, mode=Mode.SUBTRACT)
    with BuildSketch(Plane(origin=(-12.29672212420855, -3.3135220443771147, -3.1750000000000034), x_dir=(-0.1991349337901111, 0, 0.9799720802882133), z_dir=(0, 1, 0))) as fillet2_2_piece_7:
        with BuildLine():
            CenterArc((1.2458842886857935, 1.5219237330684425), FILLET2_R, 191.4863768820932, 81.50475842174365)
            Line((-0.24759316167344286, 1.2184420939723115), (0, 0))
            ThreePointArc((0, 0), (0.662704408875423, -0.01730222442965109), (1.3254088177508456, -2e-17))
        make_face()
    extrude(amount=8.65904408875423, mode=Mode.SUBTRACT)
    with BuildSketch(Plane(origin=(-3.1749999999999994, -3.3135220443771085, -12.296722124208546), x_dir=(0, 0, 1), z_dir=(0, 1, 0))) as fillet2_2_piece_8:
        with BuildLine():
            CenterArc((1.2433436813974978, 1.524), FILLET2_R, 188.4952415782563, 81.5047584217437)
            ThreePointArc((-0.2639351971676458, 1.2988636363636357), (-0.1489232954517643, 0.6459863408655977), (0, 0))
            Line((0, 0), (1.2433436813974978, 0))
        make_face()
    extrude(amount=8.659044088754218, mode=Mode.SUBTRACT)


solid = part.part
